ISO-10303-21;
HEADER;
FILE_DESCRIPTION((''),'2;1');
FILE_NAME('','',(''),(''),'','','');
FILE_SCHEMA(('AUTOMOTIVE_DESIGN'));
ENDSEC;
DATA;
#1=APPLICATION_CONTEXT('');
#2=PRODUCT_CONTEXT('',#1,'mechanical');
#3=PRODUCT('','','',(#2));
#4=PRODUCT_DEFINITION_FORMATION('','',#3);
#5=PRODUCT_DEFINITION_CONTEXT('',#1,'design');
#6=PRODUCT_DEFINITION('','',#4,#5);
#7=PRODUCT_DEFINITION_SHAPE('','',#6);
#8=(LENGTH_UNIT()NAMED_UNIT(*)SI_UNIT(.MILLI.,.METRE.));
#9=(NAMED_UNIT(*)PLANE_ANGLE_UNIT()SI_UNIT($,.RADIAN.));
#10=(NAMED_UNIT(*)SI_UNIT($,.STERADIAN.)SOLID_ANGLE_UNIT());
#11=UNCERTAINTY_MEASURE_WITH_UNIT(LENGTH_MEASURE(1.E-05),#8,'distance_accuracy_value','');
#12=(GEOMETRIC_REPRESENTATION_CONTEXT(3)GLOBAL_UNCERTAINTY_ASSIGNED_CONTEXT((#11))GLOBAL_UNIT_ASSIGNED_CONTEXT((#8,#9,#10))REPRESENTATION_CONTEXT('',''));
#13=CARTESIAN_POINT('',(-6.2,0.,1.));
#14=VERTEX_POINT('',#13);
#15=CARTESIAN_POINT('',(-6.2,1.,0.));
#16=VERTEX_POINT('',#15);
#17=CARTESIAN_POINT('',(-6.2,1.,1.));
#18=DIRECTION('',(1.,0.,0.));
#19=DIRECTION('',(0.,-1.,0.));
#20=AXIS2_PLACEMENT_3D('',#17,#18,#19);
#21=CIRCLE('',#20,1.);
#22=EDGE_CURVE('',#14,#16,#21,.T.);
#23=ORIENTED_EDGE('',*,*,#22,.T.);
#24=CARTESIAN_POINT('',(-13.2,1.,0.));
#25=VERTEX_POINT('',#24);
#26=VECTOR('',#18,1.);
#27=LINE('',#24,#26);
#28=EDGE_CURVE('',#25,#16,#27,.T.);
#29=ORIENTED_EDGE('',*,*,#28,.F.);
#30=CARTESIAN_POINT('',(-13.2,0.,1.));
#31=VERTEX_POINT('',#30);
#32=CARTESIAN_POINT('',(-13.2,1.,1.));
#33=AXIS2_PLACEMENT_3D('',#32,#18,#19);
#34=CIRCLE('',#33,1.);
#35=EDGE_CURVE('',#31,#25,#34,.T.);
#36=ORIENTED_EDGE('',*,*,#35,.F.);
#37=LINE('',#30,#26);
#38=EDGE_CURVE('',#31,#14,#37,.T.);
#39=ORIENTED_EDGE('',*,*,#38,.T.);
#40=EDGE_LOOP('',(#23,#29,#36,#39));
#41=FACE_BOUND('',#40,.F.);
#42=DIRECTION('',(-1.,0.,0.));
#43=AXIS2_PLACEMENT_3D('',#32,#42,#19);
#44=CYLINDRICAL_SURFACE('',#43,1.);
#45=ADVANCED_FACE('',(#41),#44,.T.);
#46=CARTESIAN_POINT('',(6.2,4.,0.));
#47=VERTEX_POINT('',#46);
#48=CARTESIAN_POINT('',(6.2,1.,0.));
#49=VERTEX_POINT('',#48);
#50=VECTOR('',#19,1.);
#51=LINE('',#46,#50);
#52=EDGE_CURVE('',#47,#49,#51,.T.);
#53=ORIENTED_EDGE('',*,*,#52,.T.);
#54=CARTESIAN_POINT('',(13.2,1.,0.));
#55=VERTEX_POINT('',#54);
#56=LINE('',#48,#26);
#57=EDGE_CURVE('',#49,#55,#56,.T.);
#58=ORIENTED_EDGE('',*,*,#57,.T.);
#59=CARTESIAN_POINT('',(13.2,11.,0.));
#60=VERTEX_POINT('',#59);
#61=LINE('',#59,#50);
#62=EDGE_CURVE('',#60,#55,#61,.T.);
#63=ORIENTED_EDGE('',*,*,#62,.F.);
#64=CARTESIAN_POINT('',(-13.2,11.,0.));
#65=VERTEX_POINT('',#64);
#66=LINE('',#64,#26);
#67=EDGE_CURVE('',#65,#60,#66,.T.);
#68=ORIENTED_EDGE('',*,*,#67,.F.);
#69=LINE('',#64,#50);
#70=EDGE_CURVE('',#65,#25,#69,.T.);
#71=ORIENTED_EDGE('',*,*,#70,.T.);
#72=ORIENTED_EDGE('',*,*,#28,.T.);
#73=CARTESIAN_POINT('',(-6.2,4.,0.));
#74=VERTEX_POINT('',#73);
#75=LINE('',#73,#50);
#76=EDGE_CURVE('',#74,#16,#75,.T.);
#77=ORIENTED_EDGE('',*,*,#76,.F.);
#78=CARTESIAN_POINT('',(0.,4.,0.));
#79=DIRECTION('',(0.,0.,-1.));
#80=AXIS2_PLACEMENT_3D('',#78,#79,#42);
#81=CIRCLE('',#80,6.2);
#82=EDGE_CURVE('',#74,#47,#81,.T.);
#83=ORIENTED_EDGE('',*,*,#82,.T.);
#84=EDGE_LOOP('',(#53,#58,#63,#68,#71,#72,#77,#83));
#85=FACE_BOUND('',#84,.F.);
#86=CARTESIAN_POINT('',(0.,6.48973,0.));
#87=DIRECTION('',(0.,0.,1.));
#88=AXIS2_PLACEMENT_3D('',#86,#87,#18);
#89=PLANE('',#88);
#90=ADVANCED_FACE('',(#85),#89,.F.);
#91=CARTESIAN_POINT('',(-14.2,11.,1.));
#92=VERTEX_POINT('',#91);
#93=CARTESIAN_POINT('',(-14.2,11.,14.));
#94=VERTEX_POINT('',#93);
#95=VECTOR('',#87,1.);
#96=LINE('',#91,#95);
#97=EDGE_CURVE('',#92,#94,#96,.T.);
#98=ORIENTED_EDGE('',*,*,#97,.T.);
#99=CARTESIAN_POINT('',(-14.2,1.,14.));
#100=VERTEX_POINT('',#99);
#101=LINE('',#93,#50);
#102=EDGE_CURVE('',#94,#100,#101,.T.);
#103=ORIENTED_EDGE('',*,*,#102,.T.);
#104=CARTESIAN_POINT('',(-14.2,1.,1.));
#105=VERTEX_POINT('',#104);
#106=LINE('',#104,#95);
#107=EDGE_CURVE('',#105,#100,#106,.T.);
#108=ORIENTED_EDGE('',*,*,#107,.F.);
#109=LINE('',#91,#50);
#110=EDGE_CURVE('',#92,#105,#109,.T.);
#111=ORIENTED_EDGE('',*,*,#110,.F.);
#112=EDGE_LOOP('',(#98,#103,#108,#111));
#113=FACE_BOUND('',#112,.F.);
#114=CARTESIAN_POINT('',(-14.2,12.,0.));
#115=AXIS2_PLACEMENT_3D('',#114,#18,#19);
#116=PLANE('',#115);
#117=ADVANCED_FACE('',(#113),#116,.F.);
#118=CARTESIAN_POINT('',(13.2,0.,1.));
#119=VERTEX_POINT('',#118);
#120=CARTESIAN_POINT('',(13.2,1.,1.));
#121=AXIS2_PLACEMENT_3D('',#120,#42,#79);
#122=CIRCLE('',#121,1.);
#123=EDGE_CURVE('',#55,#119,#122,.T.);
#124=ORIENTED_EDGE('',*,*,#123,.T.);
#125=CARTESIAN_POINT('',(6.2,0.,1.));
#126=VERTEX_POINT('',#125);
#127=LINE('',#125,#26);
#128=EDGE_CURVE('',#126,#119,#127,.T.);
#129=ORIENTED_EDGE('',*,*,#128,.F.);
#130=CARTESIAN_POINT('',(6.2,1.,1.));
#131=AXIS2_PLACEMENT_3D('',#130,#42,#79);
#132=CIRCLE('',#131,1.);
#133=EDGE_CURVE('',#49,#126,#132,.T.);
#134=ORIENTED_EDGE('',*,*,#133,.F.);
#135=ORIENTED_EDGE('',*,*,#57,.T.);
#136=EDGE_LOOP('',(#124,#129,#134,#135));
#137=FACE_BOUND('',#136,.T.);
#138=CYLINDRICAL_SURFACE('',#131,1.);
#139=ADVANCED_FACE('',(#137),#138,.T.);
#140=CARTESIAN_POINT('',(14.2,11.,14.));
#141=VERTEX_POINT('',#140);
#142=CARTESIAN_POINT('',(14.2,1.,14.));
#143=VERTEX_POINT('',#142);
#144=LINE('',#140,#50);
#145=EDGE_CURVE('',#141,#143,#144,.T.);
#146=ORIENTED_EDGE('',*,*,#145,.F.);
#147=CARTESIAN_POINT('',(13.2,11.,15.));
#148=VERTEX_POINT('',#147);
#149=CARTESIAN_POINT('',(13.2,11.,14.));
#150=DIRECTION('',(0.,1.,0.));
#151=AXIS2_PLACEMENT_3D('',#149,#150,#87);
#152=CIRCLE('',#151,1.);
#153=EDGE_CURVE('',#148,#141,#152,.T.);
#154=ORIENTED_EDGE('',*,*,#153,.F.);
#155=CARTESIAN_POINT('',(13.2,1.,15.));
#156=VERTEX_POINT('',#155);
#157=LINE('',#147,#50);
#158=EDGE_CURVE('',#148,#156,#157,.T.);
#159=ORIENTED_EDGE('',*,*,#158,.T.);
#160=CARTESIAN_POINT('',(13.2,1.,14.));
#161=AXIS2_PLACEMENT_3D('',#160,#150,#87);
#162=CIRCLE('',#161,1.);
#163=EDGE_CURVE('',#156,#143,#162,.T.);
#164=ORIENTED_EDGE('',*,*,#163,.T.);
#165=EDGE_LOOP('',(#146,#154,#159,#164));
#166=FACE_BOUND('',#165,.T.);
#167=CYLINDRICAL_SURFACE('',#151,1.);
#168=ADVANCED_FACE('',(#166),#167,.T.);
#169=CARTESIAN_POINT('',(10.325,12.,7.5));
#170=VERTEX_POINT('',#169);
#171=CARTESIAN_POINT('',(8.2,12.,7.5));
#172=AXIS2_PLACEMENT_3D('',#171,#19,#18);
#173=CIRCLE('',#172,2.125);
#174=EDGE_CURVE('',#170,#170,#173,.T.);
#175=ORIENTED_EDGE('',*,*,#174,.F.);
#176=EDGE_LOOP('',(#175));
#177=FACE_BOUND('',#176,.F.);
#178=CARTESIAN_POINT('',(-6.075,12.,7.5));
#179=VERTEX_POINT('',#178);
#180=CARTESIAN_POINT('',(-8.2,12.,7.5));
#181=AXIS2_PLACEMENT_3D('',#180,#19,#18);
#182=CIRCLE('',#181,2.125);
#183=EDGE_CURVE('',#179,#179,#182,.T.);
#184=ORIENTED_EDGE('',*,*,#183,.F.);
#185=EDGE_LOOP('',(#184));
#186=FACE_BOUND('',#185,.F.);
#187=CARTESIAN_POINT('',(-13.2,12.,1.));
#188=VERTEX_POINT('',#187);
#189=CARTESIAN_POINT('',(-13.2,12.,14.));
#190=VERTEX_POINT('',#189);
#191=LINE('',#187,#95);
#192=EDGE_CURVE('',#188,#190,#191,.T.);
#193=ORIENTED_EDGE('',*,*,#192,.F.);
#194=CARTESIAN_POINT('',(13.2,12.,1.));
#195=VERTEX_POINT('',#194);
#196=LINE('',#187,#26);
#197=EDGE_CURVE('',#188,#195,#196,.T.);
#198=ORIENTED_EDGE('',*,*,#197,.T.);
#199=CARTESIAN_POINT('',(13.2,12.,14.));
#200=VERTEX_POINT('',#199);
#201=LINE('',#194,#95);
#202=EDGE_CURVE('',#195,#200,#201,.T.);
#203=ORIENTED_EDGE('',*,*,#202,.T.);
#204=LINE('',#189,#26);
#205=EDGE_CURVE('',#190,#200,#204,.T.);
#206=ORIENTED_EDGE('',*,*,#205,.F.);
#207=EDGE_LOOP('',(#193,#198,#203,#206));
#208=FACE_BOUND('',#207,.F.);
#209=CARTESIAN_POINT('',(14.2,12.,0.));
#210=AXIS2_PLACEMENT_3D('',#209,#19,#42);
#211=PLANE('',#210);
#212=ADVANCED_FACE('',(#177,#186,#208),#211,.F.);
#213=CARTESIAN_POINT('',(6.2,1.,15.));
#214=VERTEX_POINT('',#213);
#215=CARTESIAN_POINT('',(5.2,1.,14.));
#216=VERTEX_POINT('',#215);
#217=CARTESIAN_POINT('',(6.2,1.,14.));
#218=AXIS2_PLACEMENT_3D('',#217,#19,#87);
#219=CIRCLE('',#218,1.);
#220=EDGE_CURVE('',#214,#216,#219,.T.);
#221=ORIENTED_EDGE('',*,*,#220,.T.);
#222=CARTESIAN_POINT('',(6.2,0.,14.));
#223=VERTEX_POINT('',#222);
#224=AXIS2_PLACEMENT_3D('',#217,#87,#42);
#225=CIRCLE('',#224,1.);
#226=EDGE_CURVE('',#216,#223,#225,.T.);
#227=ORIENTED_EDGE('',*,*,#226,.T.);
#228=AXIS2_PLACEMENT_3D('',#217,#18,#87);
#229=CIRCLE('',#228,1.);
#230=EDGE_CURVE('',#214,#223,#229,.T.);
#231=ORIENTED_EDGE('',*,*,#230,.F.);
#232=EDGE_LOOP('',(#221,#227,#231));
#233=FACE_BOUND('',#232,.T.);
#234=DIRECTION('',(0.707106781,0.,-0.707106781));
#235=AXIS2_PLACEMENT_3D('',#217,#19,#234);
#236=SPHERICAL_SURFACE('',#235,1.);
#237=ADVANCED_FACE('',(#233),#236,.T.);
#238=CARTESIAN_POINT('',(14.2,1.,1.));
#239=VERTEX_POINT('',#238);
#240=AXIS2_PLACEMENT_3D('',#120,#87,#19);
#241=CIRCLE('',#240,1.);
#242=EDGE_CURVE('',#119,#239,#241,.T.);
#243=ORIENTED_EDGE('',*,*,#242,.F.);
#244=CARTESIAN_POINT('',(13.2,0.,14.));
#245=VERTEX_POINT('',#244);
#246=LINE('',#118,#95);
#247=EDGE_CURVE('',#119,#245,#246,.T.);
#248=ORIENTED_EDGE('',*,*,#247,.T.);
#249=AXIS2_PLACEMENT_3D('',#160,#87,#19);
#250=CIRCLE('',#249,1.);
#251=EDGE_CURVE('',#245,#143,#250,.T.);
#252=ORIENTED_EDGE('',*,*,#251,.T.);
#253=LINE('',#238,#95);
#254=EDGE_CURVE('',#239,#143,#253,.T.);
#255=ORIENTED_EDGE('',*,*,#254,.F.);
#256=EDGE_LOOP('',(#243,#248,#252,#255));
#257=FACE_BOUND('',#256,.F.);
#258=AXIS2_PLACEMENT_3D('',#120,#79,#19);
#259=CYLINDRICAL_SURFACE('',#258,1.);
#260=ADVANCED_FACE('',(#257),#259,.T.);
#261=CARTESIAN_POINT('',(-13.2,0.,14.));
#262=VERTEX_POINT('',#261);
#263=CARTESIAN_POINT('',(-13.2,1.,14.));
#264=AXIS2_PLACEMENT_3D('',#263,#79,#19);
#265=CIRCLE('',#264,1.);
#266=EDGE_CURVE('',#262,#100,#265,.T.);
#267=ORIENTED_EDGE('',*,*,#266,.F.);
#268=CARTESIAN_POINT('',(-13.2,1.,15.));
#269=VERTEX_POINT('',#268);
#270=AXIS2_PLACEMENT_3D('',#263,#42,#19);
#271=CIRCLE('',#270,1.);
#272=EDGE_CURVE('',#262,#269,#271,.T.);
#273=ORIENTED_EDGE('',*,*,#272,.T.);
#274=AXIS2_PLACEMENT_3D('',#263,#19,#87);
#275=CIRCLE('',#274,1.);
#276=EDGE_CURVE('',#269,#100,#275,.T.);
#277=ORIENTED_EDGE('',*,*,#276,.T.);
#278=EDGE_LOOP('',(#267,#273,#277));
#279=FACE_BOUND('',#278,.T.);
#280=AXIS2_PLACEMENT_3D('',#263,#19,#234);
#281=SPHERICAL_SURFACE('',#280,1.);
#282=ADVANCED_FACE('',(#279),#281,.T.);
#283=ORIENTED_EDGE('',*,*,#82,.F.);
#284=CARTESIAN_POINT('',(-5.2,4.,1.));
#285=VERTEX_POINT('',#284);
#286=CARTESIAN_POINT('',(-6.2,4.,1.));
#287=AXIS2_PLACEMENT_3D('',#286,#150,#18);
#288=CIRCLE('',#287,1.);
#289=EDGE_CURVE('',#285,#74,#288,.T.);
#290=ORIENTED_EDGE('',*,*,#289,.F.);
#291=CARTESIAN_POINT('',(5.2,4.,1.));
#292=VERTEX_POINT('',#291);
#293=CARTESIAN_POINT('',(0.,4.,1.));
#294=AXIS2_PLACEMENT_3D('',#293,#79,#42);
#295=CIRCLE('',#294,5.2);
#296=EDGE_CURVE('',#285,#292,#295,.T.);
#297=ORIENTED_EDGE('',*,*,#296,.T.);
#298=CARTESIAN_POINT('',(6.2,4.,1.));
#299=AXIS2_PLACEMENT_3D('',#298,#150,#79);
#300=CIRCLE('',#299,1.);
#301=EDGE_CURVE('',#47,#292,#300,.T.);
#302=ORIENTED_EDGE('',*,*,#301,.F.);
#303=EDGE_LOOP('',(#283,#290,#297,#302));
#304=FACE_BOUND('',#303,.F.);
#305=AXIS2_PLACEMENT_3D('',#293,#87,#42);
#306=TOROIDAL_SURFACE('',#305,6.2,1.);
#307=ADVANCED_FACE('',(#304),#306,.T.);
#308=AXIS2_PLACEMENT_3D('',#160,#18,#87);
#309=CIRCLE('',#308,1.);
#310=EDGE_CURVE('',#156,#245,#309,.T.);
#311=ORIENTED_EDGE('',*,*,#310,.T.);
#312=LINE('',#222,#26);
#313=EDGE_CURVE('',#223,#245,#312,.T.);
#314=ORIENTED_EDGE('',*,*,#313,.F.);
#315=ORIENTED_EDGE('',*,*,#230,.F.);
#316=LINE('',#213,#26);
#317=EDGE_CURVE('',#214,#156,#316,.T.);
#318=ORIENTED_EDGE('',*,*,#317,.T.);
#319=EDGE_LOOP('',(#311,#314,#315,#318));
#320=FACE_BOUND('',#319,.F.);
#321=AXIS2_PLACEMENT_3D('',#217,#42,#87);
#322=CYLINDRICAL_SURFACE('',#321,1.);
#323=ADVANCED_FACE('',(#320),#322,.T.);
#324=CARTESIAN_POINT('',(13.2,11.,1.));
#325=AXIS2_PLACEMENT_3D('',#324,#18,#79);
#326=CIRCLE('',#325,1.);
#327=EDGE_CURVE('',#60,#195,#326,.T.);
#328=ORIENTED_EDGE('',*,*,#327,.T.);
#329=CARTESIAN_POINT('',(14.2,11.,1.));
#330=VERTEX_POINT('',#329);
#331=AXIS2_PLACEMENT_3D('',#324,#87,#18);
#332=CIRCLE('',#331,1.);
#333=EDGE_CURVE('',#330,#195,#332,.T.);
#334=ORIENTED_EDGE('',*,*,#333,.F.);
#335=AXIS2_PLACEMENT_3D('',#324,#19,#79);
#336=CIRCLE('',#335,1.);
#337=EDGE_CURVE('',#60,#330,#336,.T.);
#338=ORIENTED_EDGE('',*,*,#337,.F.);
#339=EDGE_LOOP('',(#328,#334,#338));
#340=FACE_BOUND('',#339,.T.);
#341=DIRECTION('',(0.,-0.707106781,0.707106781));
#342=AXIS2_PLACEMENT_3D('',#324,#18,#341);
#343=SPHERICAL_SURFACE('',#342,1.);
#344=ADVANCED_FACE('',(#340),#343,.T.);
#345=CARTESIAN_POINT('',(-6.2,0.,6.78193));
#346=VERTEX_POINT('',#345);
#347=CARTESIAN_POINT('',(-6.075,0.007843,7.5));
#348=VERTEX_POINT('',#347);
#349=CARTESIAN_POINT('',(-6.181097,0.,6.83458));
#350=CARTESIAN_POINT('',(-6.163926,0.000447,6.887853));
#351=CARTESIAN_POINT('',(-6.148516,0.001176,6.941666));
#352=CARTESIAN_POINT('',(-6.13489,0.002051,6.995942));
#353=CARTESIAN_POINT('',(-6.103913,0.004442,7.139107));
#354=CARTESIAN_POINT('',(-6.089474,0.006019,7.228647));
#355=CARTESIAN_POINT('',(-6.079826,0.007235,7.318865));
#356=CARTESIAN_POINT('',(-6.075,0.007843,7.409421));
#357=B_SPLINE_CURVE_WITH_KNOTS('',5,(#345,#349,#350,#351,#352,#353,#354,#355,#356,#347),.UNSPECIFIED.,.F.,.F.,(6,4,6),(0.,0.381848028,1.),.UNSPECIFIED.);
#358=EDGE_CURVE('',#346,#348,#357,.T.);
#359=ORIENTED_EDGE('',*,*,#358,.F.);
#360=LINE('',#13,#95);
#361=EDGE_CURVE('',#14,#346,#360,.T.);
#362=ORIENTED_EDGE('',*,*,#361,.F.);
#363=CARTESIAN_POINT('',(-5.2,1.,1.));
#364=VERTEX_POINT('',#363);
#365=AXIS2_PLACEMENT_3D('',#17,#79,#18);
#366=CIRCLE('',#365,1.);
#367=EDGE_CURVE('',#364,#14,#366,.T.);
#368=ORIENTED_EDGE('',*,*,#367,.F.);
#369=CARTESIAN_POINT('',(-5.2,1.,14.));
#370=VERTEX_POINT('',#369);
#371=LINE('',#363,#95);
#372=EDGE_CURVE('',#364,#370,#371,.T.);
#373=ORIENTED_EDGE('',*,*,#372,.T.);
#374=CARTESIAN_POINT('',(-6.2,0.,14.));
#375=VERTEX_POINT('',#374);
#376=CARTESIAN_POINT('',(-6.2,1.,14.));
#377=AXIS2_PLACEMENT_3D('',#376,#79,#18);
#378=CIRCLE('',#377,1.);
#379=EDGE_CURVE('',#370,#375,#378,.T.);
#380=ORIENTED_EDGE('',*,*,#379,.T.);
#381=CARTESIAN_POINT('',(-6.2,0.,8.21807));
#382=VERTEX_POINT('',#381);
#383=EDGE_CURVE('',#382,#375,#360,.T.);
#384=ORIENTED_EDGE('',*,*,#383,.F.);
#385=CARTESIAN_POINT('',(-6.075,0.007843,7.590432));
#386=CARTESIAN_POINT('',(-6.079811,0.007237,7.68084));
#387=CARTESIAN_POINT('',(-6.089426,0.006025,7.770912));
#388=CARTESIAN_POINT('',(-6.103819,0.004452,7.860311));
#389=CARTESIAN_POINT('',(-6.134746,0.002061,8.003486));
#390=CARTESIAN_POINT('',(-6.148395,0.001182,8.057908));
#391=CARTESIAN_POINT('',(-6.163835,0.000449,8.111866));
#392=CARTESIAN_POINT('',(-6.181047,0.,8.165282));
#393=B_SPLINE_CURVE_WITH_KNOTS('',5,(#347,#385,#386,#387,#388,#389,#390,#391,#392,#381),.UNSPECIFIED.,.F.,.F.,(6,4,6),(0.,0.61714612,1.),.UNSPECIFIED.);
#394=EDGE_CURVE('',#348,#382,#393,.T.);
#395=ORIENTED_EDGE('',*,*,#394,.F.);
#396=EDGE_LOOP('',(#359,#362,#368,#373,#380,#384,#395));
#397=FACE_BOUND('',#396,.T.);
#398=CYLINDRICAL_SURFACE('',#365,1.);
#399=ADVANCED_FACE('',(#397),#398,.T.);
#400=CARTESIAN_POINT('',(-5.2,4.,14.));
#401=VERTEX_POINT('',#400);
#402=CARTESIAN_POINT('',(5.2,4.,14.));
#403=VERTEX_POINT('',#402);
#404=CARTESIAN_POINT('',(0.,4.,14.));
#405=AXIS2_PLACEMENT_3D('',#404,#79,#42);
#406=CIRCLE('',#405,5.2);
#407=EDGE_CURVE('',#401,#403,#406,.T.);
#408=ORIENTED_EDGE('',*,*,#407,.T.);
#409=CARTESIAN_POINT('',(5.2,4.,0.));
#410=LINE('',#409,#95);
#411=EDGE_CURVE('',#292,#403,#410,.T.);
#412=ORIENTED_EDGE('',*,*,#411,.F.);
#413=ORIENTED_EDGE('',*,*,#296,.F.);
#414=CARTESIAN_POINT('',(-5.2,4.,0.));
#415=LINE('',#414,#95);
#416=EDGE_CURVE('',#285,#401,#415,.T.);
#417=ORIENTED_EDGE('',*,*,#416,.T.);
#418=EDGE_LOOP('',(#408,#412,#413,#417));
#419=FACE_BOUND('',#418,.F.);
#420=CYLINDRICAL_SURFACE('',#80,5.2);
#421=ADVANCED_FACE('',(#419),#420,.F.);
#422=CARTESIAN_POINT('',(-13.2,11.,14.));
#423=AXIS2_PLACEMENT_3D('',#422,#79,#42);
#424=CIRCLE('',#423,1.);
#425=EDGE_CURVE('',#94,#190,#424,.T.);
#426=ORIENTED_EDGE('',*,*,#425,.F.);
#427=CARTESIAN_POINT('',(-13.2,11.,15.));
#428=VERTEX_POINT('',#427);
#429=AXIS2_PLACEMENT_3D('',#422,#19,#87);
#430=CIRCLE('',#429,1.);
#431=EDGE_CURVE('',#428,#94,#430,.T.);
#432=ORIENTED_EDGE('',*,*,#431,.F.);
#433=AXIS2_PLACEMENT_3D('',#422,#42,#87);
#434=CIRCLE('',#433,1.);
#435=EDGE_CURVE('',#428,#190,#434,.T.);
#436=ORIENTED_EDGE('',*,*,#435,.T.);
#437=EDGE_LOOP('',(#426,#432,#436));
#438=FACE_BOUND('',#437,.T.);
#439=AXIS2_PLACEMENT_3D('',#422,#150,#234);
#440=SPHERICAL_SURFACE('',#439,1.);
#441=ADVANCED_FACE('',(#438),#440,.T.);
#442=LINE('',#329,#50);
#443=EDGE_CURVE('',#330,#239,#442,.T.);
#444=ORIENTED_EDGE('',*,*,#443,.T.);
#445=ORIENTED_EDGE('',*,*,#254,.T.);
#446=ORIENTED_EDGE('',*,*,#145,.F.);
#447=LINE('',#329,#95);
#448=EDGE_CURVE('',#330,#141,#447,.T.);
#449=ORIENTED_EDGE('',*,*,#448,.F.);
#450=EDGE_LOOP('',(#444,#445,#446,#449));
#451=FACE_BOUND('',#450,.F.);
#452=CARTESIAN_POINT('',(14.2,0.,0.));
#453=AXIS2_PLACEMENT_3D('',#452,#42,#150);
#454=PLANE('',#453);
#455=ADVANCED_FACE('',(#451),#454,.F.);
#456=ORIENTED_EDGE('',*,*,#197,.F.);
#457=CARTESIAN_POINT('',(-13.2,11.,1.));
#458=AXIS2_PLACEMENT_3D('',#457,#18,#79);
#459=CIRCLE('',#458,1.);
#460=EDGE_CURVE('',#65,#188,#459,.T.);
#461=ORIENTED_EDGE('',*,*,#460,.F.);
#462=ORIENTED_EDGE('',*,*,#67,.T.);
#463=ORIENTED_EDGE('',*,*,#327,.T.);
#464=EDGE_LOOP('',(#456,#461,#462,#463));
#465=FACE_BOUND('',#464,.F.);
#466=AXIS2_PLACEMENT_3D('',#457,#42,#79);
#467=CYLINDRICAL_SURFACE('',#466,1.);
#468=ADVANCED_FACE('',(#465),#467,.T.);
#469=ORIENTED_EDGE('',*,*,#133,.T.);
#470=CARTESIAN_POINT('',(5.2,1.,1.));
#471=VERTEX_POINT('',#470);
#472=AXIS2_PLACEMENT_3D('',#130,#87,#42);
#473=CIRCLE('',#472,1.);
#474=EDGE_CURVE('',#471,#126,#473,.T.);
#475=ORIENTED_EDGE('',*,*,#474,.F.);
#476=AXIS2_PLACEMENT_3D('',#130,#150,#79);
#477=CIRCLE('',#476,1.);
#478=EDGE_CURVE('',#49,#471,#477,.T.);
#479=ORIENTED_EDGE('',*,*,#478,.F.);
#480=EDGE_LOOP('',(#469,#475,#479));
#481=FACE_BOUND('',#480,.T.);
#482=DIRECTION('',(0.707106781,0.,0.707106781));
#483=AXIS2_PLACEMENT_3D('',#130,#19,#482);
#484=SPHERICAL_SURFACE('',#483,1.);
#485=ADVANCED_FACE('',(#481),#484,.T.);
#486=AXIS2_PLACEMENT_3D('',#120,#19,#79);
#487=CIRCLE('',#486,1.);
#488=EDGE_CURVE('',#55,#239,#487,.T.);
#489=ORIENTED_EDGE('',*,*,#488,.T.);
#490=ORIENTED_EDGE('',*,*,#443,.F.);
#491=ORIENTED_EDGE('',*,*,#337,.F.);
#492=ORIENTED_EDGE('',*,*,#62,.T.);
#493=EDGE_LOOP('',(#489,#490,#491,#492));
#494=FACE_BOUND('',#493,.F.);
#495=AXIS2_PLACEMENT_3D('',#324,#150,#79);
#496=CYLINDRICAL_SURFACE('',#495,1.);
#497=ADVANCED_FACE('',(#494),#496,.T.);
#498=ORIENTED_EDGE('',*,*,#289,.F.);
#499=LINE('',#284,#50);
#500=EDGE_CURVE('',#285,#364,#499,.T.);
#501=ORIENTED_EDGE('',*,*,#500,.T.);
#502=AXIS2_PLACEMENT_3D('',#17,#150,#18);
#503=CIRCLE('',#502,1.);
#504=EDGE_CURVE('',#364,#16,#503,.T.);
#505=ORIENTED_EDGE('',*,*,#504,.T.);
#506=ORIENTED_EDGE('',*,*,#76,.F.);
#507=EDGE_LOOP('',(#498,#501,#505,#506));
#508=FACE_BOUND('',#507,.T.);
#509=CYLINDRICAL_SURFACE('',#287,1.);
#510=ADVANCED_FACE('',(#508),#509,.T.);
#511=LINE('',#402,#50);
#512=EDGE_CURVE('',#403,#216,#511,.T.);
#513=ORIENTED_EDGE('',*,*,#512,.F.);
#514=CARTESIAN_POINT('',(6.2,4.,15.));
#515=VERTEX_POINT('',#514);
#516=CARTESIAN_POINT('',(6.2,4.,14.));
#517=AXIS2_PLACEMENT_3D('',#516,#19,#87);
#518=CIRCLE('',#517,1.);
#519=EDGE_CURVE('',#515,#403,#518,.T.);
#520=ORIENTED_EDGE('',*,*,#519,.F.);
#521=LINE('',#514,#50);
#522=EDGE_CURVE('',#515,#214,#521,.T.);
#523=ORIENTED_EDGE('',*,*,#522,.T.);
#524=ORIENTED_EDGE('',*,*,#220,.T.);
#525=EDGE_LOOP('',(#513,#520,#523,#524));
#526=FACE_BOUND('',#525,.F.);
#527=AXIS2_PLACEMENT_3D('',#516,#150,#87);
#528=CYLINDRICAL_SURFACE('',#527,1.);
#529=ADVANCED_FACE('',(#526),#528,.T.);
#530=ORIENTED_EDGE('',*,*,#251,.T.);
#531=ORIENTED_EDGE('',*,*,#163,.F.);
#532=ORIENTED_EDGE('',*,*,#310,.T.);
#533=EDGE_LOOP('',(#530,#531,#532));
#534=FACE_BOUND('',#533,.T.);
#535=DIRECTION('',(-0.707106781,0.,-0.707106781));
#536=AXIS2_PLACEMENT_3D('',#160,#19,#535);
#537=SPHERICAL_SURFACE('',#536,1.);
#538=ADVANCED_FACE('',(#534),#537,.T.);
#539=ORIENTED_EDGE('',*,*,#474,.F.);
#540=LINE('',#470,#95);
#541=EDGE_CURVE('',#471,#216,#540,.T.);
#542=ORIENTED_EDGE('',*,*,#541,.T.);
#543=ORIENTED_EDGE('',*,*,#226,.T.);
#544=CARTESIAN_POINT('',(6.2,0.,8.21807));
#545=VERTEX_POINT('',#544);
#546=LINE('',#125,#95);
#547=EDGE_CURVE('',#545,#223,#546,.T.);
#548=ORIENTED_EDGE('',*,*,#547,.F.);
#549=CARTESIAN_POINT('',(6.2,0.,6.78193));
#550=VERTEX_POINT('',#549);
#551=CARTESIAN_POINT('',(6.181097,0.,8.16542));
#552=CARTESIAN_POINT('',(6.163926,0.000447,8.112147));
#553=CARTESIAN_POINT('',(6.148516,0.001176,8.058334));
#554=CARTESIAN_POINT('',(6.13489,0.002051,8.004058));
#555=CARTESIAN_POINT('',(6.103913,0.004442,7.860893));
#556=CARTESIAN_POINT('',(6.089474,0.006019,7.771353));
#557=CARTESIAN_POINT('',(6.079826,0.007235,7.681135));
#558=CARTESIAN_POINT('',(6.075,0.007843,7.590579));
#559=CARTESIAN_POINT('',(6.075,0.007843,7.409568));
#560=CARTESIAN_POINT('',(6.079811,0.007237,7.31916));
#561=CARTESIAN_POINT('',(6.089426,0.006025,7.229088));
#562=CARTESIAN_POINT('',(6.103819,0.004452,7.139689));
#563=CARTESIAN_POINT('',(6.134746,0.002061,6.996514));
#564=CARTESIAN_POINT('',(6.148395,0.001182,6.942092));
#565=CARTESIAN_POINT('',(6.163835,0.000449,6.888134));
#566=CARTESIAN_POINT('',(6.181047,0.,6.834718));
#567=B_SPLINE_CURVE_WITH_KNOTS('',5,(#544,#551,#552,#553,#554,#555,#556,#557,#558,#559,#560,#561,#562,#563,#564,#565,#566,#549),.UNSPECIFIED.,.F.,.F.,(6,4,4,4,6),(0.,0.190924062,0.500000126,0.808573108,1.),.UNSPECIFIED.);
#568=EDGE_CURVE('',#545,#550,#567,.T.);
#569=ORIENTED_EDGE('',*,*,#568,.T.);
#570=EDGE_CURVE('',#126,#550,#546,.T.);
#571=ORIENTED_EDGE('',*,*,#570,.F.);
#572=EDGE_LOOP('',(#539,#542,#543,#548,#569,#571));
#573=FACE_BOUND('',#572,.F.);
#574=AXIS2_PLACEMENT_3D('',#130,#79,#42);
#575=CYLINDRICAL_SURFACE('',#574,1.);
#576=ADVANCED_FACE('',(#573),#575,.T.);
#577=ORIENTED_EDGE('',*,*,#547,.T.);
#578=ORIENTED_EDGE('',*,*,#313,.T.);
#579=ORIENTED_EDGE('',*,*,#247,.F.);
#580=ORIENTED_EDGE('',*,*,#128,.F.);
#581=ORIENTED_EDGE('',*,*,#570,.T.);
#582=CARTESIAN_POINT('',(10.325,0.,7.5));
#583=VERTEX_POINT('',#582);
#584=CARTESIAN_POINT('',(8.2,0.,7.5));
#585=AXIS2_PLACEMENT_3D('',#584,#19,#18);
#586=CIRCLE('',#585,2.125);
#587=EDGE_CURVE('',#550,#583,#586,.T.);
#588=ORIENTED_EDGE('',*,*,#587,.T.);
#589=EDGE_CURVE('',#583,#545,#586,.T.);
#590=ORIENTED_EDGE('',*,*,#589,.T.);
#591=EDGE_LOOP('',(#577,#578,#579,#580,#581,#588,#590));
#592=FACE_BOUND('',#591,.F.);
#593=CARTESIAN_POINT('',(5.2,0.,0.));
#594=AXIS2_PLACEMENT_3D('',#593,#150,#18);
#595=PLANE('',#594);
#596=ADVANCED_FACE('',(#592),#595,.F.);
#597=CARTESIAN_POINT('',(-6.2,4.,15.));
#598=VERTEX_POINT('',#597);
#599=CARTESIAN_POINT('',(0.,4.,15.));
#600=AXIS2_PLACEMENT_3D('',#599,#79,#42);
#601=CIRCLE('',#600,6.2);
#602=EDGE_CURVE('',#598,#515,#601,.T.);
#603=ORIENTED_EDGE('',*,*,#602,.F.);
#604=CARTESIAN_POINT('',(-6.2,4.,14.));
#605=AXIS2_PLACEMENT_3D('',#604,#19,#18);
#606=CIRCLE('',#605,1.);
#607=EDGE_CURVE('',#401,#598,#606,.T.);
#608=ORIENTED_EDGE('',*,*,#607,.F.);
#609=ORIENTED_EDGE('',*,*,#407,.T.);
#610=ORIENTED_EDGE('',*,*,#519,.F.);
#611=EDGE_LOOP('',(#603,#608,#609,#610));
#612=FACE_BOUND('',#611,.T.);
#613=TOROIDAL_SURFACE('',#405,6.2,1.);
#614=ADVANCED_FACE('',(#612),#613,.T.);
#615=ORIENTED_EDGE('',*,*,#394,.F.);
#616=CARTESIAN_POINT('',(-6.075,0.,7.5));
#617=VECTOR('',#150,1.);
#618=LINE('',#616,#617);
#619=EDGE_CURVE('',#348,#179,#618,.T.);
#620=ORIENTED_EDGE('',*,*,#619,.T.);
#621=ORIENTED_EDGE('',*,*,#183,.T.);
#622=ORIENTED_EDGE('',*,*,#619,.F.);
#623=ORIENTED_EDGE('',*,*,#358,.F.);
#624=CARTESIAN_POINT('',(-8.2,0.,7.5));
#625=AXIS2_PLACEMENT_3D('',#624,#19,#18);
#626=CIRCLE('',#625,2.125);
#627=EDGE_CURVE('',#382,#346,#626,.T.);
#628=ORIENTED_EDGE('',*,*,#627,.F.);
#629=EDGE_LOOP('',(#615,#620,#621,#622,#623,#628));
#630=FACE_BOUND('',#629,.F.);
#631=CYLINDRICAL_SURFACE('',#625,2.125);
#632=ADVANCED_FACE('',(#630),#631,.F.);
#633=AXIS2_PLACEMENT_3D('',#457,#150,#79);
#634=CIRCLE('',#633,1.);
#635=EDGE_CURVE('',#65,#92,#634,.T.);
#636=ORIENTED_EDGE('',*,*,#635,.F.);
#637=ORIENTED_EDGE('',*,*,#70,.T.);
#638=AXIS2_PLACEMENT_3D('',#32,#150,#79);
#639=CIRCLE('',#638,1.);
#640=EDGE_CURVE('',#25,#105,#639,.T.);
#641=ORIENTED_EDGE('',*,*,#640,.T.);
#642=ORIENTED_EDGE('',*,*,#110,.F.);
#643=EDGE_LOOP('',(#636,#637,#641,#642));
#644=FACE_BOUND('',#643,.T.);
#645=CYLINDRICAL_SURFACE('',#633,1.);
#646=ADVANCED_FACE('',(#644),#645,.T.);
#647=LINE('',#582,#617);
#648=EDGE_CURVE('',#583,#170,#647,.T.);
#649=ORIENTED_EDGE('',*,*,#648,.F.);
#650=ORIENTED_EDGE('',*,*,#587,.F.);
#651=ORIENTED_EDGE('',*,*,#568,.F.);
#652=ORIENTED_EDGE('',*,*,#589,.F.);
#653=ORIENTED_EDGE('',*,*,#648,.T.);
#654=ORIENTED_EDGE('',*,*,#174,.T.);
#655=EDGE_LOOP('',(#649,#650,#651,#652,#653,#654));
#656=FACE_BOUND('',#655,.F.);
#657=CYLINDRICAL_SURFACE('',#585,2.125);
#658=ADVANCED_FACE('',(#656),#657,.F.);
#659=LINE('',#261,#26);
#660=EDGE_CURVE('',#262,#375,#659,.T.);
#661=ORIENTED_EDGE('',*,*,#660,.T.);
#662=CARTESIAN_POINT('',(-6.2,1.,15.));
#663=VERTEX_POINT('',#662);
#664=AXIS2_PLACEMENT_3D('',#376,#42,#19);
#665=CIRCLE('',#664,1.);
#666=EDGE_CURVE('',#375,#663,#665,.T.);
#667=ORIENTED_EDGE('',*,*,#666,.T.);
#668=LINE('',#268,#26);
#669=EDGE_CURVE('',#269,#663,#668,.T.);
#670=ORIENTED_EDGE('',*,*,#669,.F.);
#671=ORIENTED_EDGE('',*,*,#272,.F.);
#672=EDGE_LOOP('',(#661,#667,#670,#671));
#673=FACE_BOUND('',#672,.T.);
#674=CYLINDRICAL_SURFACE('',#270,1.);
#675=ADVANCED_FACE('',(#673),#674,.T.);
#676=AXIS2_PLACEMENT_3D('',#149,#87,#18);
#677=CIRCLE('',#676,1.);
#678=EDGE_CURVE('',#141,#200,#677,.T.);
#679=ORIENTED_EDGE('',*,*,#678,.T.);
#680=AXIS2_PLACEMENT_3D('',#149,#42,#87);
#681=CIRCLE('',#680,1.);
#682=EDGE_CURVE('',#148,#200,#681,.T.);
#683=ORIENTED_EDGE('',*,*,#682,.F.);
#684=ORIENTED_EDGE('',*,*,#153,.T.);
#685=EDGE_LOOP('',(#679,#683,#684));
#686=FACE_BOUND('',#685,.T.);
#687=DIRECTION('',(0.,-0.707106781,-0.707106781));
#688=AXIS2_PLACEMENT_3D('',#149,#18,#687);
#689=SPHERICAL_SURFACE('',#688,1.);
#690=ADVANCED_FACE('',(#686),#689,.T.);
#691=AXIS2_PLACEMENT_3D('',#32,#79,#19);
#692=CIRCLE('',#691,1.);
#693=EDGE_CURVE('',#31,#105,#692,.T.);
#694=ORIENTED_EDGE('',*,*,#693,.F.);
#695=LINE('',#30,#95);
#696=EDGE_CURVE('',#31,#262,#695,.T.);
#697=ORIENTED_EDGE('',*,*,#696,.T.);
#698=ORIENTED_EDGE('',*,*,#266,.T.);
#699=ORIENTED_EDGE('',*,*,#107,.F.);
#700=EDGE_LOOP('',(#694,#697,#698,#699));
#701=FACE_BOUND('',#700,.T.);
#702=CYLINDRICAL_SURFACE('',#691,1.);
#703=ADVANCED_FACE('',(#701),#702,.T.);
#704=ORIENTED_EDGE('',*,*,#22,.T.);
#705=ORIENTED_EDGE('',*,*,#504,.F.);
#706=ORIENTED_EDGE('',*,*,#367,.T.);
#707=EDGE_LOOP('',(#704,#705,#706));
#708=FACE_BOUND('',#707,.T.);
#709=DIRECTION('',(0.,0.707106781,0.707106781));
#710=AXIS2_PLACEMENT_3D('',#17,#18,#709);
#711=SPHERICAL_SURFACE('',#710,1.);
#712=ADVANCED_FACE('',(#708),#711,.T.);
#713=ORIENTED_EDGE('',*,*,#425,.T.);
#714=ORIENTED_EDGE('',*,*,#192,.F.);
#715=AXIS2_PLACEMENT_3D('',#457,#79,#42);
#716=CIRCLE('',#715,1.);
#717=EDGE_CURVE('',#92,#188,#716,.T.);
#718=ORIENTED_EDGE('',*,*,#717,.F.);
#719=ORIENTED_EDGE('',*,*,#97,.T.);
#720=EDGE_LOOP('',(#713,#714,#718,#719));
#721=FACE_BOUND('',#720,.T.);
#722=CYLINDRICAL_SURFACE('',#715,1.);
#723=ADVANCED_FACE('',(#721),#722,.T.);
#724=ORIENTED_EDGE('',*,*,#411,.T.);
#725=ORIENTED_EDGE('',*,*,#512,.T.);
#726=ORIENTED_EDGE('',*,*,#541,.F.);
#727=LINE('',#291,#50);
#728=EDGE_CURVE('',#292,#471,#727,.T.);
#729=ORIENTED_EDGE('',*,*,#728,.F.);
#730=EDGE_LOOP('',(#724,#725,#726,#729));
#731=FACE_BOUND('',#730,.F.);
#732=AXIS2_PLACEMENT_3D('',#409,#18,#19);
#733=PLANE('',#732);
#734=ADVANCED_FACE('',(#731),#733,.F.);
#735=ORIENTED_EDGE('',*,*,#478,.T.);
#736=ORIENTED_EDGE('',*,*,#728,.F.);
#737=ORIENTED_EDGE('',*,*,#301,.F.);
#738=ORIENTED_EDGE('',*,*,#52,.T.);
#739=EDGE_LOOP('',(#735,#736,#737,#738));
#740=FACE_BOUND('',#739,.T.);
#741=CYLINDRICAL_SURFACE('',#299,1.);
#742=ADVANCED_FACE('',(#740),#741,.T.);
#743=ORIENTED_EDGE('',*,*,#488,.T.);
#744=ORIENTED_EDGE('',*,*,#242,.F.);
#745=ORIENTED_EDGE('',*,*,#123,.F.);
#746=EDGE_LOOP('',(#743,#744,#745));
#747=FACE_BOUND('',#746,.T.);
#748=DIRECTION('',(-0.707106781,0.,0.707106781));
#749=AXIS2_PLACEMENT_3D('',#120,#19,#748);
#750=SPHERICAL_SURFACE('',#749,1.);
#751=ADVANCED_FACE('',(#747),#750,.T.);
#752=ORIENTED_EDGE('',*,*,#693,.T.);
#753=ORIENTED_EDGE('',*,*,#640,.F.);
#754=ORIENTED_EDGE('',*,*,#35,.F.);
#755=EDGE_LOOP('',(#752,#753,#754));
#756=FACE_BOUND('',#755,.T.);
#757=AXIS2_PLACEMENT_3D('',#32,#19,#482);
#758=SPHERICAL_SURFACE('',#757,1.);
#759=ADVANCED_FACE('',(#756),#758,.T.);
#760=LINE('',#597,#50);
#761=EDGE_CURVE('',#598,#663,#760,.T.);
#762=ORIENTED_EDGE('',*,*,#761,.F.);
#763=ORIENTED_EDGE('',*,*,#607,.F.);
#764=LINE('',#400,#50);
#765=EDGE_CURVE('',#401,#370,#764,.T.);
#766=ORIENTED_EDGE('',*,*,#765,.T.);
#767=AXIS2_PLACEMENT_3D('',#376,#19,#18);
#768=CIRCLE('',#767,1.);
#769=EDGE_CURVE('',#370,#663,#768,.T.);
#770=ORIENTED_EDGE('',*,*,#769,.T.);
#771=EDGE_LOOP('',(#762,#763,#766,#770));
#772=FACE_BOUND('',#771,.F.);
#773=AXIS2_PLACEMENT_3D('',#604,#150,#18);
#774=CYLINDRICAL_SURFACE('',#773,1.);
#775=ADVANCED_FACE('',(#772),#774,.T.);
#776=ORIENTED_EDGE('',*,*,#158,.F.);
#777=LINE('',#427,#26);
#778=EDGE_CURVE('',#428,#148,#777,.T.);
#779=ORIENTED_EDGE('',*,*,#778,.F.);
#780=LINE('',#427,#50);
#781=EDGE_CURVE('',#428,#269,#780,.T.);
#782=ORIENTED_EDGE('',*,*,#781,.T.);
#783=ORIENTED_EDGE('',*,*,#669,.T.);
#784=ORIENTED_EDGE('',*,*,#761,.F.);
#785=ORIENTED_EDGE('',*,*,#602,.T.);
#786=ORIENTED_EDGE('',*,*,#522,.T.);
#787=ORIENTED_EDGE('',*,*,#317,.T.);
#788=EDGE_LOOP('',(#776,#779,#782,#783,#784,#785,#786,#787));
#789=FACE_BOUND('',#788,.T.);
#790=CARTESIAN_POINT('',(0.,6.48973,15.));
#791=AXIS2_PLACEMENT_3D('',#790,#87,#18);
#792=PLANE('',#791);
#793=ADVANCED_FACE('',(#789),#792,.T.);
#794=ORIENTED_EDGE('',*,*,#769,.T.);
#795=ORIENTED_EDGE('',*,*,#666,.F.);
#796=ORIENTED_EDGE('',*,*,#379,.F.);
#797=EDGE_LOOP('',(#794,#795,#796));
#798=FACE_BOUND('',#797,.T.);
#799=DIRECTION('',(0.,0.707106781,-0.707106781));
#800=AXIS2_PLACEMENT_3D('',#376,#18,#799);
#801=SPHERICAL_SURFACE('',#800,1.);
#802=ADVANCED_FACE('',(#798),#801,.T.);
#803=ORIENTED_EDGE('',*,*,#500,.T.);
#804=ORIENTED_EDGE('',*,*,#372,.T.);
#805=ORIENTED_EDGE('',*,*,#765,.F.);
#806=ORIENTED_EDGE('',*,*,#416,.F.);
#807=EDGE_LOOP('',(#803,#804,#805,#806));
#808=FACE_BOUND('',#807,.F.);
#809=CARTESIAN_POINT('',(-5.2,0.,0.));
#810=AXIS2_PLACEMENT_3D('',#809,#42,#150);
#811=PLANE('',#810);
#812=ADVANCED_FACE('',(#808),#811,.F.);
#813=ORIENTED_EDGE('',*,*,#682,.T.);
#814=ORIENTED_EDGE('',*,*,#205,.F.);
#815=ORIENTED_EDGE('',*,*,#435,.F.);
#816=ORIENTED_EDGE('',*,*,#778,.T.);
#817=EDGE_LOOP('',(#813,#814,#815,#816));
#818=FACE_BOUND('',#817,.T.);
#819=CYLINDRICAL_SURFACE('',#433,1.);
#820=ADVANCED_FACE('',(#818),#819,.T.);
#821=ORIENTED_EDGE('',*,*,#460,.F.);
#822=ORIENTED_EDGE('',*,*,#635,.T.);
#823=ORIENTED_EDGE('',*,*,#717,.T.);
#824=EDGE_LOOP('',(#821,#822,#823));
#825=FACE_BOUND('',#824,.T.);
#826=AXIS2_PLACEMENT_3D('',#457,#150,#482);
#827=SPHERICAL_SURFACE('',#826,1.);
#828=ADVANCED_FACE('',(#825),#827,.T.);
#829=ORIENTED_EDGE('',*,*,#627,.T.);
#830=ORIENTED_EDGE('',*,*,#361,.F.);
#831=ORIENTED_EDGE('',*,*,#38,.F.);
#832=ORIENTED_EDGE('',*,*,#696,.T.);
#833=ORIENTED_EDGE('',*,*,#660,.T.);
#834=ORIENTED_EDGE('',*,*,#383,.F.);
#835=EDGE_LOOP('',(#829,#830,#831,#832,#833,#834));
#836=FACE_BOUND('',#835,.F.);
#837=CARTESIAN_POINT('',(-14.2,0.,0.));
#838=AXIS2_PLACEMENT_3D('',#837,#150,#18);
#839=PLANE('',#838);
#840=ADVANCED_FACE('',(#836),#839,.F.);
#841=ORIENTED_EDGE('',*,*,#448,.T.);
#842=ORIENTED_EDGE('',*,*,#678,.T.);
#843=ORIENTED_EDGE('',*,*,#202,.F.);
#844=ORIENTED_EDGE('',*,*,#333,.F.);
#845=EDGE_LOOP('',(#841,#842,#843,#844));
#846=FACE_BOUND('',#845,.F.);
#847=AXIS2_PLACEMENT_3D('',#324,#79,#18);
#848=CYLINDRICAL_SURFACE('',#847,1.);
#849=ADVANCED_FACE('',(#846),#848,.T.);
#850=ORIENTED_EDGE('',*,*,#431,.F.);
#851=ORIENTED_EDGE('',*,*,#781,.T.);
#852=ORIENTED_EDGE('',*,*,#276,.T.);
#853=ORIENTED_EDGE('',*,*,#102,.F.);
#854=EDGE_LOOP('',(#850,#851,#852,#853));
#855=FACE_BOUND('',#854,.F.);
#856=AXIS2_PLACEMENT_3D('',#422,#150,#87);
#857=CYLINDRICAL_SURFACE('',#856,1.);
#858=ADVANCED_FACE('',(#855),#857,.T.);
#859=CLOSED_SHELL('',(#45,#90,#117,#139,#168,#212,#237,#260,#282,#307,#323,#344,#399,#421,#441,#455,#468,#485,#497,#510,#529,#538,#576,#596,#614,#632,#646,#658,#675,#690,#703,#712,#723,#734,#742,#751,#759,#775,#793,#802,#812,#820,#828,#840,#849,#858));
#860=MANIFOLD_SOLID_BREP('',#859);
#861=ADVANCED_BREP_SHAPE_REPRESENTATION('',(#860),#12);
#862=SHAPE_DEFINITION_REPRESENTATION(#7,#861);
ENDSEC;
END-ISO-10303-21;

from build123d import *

# Parameters (mm, degrees)
F1_DEPTH     = 15
F2_R         = 2.125
F3_DEPTH     = 12.001
F4_T1_DEPTH  = 3
F4_T3_DEPTH  = 7
F4_T5_DEPTH  = 10
F4_T7_DEPTH  = 26.4
F4_T9_DEPTH  = 7
F4_T11_DEPTH = 13
F4_S15_W     = 1
F4_S15_H     = 1
F4_T16_DEPTH = 1
F4_S21_W     = 1
F4_S21_H     = 1
F4_T22_DEPTH = 1
F4_S27_W     = 1
F4_S27_H     = 1
F4_T28_DEPTH = 1
F4_S33_W     = 1
F4_S33_H     = 1
F4_T34_DEPTH = 1
F4_S39_W     = 1
F4_S39_H     = 1
F4_T40_DEPTH = 1
F4_S45_W     = 1
F4_S45_H     = 1
F4_T46_DEPTH = 1
F4_S51_W     = 1
F4_S51_H     = 1
F4_T52_DEPTH = 1
F4_S57_W     = 1
F4_S57_H     = 1
F4_T58_DEPTH = 1
F4_S63_W     = 1
F4_S63_H     = 1
F4_T64_DEPTH = 1
F4_S69_W     = 1
F4_S69_H     = 1
F4_T70_DEPTH = 1
F4_S75_W     = 1
F4_S75_H     = 1
F4_T76_DEPTH = 1
F4_S81_W     = 1
F4_S81_H     = 1
F4_T82_DEPTH = 1
F4_T86_ANGLE = 180
F4_T88_ANGLE = 180


# Not quite as in the source:
# - a fillet or chamfer that OpenCascade refuses, or shapes differently, is made with other operations: its cross-section is extruded or revolved along the edge and cut away or added


with BuildPart() as f1:
    # F0 (on Top) → F1 (new body)
    with BuildSketch(Plane.XY):
        with BuildLine():
            Line((5.2, 4), (5.2, 0))
            Line((5.2, 0), (14.2, 0))
            Line((14.2, 0), (14.2, 12))
            Line((14.2, 12), (-14.2, 12))
            Line((-14.2, 12), (-14.2, 0))
            Line((-14.2, 0), (-5.2, 0))
            Line((-5.2, 0), (-5.2, 4))
            ThreePointArc((-5.2, 4), (0, 9.2), (5.2, 4))
        make_face()
    extrude(amount=F1_DEPTH)

    # F2 (on face) → F3 (cut, through all)
    with BuildSketch(Plane.XZ):
        with Locations((-8.2, 7.5)):
            Circle(F2_R)
        with Locations((8.2, 7.5)):
            Circle(F2_R)
    extrude(amount=-F3_DEPTH, mode=Mode.SUBTRACT)

    # F4: fillet of radius 1 on 22 edges, made by hand

    # F4_s2 → F4_t1 (cut)
    with BuildSketch(Plane.XZ.offset(-4)):
        with BuildLine():
            ThreePointArc((-5.2, 14), (-5.4928932188, 14.7071067812), (-6.2, 15))
            Line((-6.2, 15), (-5.2, 15))
            Line((-5.2, 15), (-5.2, 14))
        make_face()
        with BuildLine():
            ThreePointArc((6.2, 15), (5.4928932188, 14.7071067812), (5.2, 14))
            Line((5.2, 14), (5.2, 15))
            Line((5.2, 15), (6.2, 15))
        make_face()
        with BuildLine():
            ThreePointArc((-5.2, 1), (-5.4928932188, 0.2928932188), (-6.2, 0))
            Line((-6.2, 0), (-5.2, 0))
            Line((-5.2, 0), (-5.2, 1))
        make_face()
        with BuildLine():
            ThreePointArc((6.2, 0), (5.4928932188, 0.2928932188), (5.2, 1))
            Line((5.2, 1), (5.2, 0))
            Line((5.2, 0), (6.2, 0))
        make_face()
    extrude(amount=F4_T1_DEPTH, mode=Mode.SUBTRACT)

    # F4_s4 → F4_t3 (cut)
    with BuildSketch(Plane.YZ.offset(6.2)):
        with BuildLine():
            ThreePointArc((1, 15), (0.2928932188, 14.7071067812), (0, 14))
            Line((0, 14), (0, 15))
            Line((0, 15), (1, 15))
        make_face()
        with BuildLine():
            ThreePointArc((1, 0), (0.2928932188, 0.2928932188), (0, 1))
            Line((0, 1), (0, 0))
            Line((0, 0), (1, 0))
        make_face()
    extrude(amount=F4_T3_DEPTH, mode=Mode.SUBTRACT)

    # F4_s6 → F4_t5 (cut)
    with BuildSketch(Plane.XZ.offset(-11)):
        with BuildLine():
            ThreePointArc((13.2, 15), (13.9071067812, 14.7071067812), (14.2, 14))
            Line((14.2, 14), (14.2, 15))
            Line((14.2, 15), (13.2, 15))
        make_face()
        with BuildLine():
            ThreePointArc((-13.2, 15), (-13.9071067812, 14.7071067812), (-14.2, 14))
            Line((-14.2, 14), (-14.2, 15))
            Line((-14.2, 15), (-13.2, 15))
        make_face()
        with BuildLine():
            ThreePointArc((-13.2, 0), (-13.9071067812, 0.2928932188), (-14.2, 1))
            Line((-14.2, 1), (-14.2, 0))
            Line((-14.2, 0), (-13.2, 0))
        make_face()
        with BuildLine():
            ThreePointArc((13.2, 0), (13.9071067812, 0.2928932188), (14.2, 1))
            Line((14.2, 1), (14.2, 0))
            Line((14.2, 0), (13.2, 0))
        make_face()
    extrude(amount=F4_T5_DEPTH, mode=Mode.SUBTRACT)

    # F4_s8 → F4_t7 (cut)
    with BuildSketch(Plane.YZ.offset(-13.2)):
        with BuildLine():
            ThreePointArc((11, 15), (11.7071067812, 14.7071067812), (12, 14))
            Line((12, 14), (12, 15))
            Line((12, 15), (11, 15))
        make_face()
        with BuildLine():
            ThreePointArc((11, 0), (11.7071067812, 0.2928932188), (12, 1))
            Line((12, 1), (12, 0))
            Line((12, 0), (11, 0))
        make_face()
    extrude(amount=F4_T7_DEPTH, mode=Mode.SUBTRACT)

    # F4_s10 → F4_t9 (cut)
    with BuildSketch(Plane.YZ.offset(-13.2)):
        with BuildLine():
            ThreePointArc((0, 14), (0.2928932188, 14.7071067812), (1, 15))
            Line((1, 15), (0, 15))
            Line((0, 15), (0, 14))
        make_face()
        with BuildLine():
            ThreePointArc((0, 1), (0.2928932188, 0.2928932188), (1, 0))
            Line((1, 0), (0, 0))
            Line((0, 0), (0, 1))
        make_face()
    extrude(amount=F4_T9_DEPTH, mode=Mode.SUBTRACT)

    # F4_s12 → F4_t11 (cut)
    with BuildSketch(Plane.XY.offset(1)):
        with BuildLine():
            ThreePointArc((-14.2, 11), (-13.9071067812, 11.7071067812), (-13.2, 12))
            Line((-13.2, 12), (-14.2, 12))
            Line((-14.2, 12), (-14.2, 11))
        make_face()
        with BuildLine():
            ThreePointArc((-13.2, 0), (-13.9071067812, 0.2928932188), (-14.2, 1))
            Line((-14.2, 1), (-14.2, 0))
            Line((-14.2, 0), (-13.2, 0))
        make_face()
        with BuildLine():
            ThreePointArc((13.2, 0), (13.9071067812, 0.2928932188), (14.2, 1))
            Line((14.2, 1), (14.2, 0))
            Line((14.2, 0), (13.2, 0))
        make_face()
        with BuildLine():
            ThreePointArc((14.2, 11), (13.9071067812, 11.7071067812), (13.2, 12))
            Line((13.2, 12), (14.2, 12))
            Line((14.2, 12), (14.2, 11))
        make_face()
        with BuildLine():
            ThreePointArc((-5.2, 1), (-5.4928932188, 0.2928932188), (-6.2, 0))
            Line((-6.2, 0), (-5.2, 0))
            Line((-5.2, 0), (-5.2, 1))
        make_face()
        with BuildLine():
            ThreePointArc((5.2, 1), (5.4928932188, 0.2928932188), (6.2, 0))
            Line((6.2, 0), (5.2, 0))
            Line((5.2, 0), (5.2, 1))
        make_face()
    extrude(amount=F4_T11_DEPTH, mode=Mode.SUBTRACT)


with BuildPart() as f4_tool14:
    # F4_s15 → F4_t16 (new body)
    with BuildSketch(Plane.YZ.offset(-6.2)):
        with Locations((0.5, 14.5)):
            Rectangle(F4_S15_W, F4_S15_H)
    extrude(amount=F4_T16_DEPTH)

    # F4_s17 → F4_t18 (revolve, cut)
    with BuildSketch(Plane(origin=(-6.2, 1, 14), x_dir=(0, 0.7071067812, -0.7071067812), z_dir=(0, -0.7071067812, -0.7071067812))):
        with BuildLine():
            ThreePointArc((0, -1), (1, 0), (0, 1))
            Line((0, 1), (0, -1))
        make_face()
    revolve(axis=Axis((-6.2, 1, 14), (1, 0, 0)), mode=Mode.SUBTRACT)


with BuildPart() as f1_1:
    add(f1.part)

    # F4_t13: cut F4_tool14
    add(f4_tool14.part, mode=Mode.SUBTRACT)


with BuildPart() as f4_tool20:
    # F4_s21 → F4_t22 (new body)
    with BuildSketch(Plane.XZ.offset(-1)):
        with Locations((5.7, 14.5)):
            Rectangle(F4_S21_W, F4_S21_H)
    extrude(amount=F4_T22_DEPTH)

    # F4_s23 → F4_t24 (revolve, cut)
    with BuildSketch(Plane(origin=(6.2, 1, 14), x_dir=(0.7071067812, 0, -0.7071067812), z_dir=(-0.7071067812, 0, -0.7071067812))):
        with BuildLine():
            ThreePointArc((0, -1), (1, 0), (0, 1))
            Line((0, 1), (0, -1))
        make_face()
    revolve(axis=Axis((6.2, 1, 14), (0, -1, 0)), mode=Mode.SUBTRACT)


with BuildPart() as f1_2:
    add(f1_1.part)

    # F4_t19: cut F4_tool20
    add(f4_tool20.part, mode=Mode.SUBTRACT)


with BuildPart() as f4_tool26:
    # F4_s27 → F4_t28 (new body)
    with BuildSketch(Plane.XZ.offset(-1)):
        with Locations((13.7, 14.5)):
            Rectangle(F4_S27_W, F4_S27_H)
    extrude(amount=F4_T28_DEPTH)

    # F4_s29 → F4_t30 (revolve, cut)
    with BuildSketch(Plane(origin=(13.2, 1, 14), x_dir=(-0.7071067812, 0, -0.7071067812), z_dir=(-0.7071067812, 0, 0.7071067812))):
        with BuildLine():
            ThreePointArc((0, -1), (1, 0), (0, 1))
            Line((0, 1), (0, -1))
        make_face()
    revolve(axis=Axis((13.2, 1, 14), (0, -1, 0)), mode=Mode.SUBTRACT)


with BuildPart() as f1_3:
    add(f1_2.part)

    # F4_t25: cut F4_tool26
    add(f4_tool26.part, mode=Mode.SUBTRACT)


with BuildPart() as f4_tool32:
    # F4_s33 → F4_t34 (new body)
    with BuildSketch(Plane.YZ.offset(13.2)):
        with Locations((11.5, 14.5)):
            Rectangle(F4_S33_W, F4_S33_H)
    extrude(amount=F4_T34_DEPTH)

    # F4_s35 → F4_t36 (revolve, cut)
    with BuildSketch(Plane(origin=(13.2, 11, 14), x_dir=(0, -0.7071067812, -0.7071067812), z_dir=(0, -0.7071067812, 0.7071067812))):
        with BuildLine():
            ThreePointArc((0, -1), (1, 0), (0, 1))
            Line((0, 1), (0, -1))
        make_face()
    revolve(axis=Axis((13.2, 11, 14), (1, 0, 0)), mode=Mode.SUBTRACT)


with BuildPart() as f1_4:
    add(f1_3.part)

    # F4_t31: cut F4_tool32
    add(f4_tool32.part, mode=Mode.SUBTRACT)


with BuildPart() as f4_tool38:
    # F4_s39 → F4_t40 (new body)
    with BuildSketch(Plane.XZ.offset(-11)):
        with Locations((-13.7, 14.5)):
            Rectangle(F4_S39_W, F4_S39_H)
    extrude(amount=-F4_T40_DEPTH)

    # F4_s41 → F4_t42 (revolve, cut)
    with BuildSketch(Plane(origin=(-13.2, 11, 14), x_dir=(0.7071067812, 0, -0.7071067812), z_dir=(0.7071067812, 0, 0.7071067812))):
        with BuildLine():
            ThreePointArc((0, -1), (1, 0), (0, 1))
            Line((0, 1), (0, -1))
        make_face()
    revolve(axis=Axis((-13.2, 11, 14), (0, 1, 0)), mode=Mode.SUBTRACT)


with BuildPart() as f1_5:
    add(f1_4.part)

    # F4_t37: cut F4_tool38
    add(f4_tool38.part, mode=Mode.SUBTRACT)


with BuildPart() as f4_tool44:
    # F4_s45 → F4_t46 (new body)
    with BuildSketch(Plane.XZ.offset(-1)):
        with Locations((-13.7, 14.5)):
            Rectangle(F4_S45_W, F4_S45_H)
    extrude(amount=F4_T46_DEPTH)

    # F4_s47 → F4_t48 (revolve, cut)
    with BuildSketch(Plane(origin=(-13.2, 1, 14), x_dir=(0.7071067812, 0, -0.7071067812), z_dir=(-0.7071067812, 0, -0.7071067812))):
        with BuildLine():
            ThreePointArc((0, -1), (1, 0), (0, 1))
            Line((0, 1), (0, -1))
        make_face()
    revolve(axis=Axis((-13.2, 1, 14), (0, -1, 0)), mode=Mode.SUBTRACT)


with BuildPart() as f1_6:
    add(f1_5.part)

    # F4_t43: cut F4_tool44
    add(f4_tool44.part, mode=Mode.SUBTRACT)


with BuildPart() as f4_tool50:
    # F4_s51 → F4_t52 (new body)
    with BuildSketch(Plane.XZ.offset(-11)):
        with Locations((-13.7, 0.5)):
            Rectangle(F4_S51_W, F4_S51_H)
    extrude(amount=-F4_T52_DEPTH)

    # F4_s53 → F4_t54 (revolve, cut)
    with BuildSketch(Plane(origin=(-13.2, 11, 1), x_dir=(0.7071067812, 0, 0.7071067812), z_dir=(-0.7071067812, 0, 0.7071067812))):
        with BuildLine():
            ThreePointArc((0, -1), (1, 0), (0, 1))
            Line((0, 1), (0, -1))
        make_face()
    revolve(axis=Axis((-13.2, 11, 1), (0, 1, 0)), mode=Mode.SUBTRACT)


with BuildPart() as f1_7:
    add(f1_6.part)

    # F4_t49: cut F4_tool50
    add(f4_tool50.part, mode=Mode.SUBTRACT)


with BuildPart() as f4_tool56:
    # F4_s57 → F4_t58 (new body)
    with BuildSketch(Plane.XZ.offset(-1)):
        with Locations((-13.7, 0.5)):
            Rectangle(F4_S57_W, F4_S57_H)
    extrude(amount=F4_T58_DEPTH)

    # F4_s59 → F4_t60 (revolve, cut)
    with BuildSketch(Plane(origin=(-13.2, 1, 1), x_dir=(0.7071067812, 0, 0.7071067812), z_dir=(0.7071067812, 0, -0.7071067812))):
        with BuildLine():
            ThreePointArc((0, -1), (1, 0), (0, 1))
            Line((0, 1), (0, -1))
        make_face()
    revolve(axis=Axis((-13.2, 1, 1), (0, -1, 0)), mode=Mode.SUBTRACT)


with BuildPart() as f1_8:
    add(f1_7.part)

    # F4_t55: cut F4_tool56
    add(f4_tool56.part, mode=Mode.SUBTRACT)


with BuildPart() as f4_tool62:
    # F4_s63 → F4_t64 (new body)
    with BuildSketch(Plane.YZ.offset(-6.2)):
        with Locations((0.5, 0.5)):
            Rectangle(F4_S63_W, F4_S63_H)
    extrude(amount=F4_T64_DEPTH)

    # F4_s65 → F4_t66 (revolve, cut)
    with BuildSketch(Plane(origin=(-6.2, 1, 1), x_dir=(0, 0.7071067812, 0.7071067812), z_dir=(0, 0.7071067812, -0.7071067812))):
        with BuildLine():
            ThreePointArc((0, -1), (1, 0), (0, 1))
            Line((0, 1), (0, -1))
        make_face()
    revolve(axis=Axis((-6.2, 1, 1), (1, 0, 0)), mode=Mode.SUBTRACT)


with BuildPart() as f1_9:
    add(f1_8.part)

    # F4_t61: cut F4_tool62
    add(f4_tool62.part, mode=Mode.SUBTRACT)


with BuildPart() as f4_tool68:
    # F4_s69 → F4_t70 (new body)
    with BuildSketch(Plane.XZ.offset(-1)):
        with Locations((5.7, 0.5)):
            Rectangle(F4_S69_W, F4_S69_H)
    extrude(amount=F4_T70_DEPTH)

    # F4_s71 → F4_t72 (revolve, cut)
    with BuildSketch(Plane(origin=(6.2, 1, 1), x_dir=(0.7071067812, 0, 0.7071067812), z_dir=(0.7071067812, 0, -0.7071067812))):
        with BuildLine():
            ThreePointArc((0, -1), (1, 0), (0, 1))
            Line((0, 1), (0, -1))
        make_face()
    revolve(axis=Axis((6.2, 1, 1), (0, -1, 0)), mode=Mode.SUBTRACT)


with BuildPart() as f1_10:
    add(f1_9.part)

    # F4_t67: cut F4_tool68
    add(f4_tool68.part, mode=Mode.SUBTRACT)


with BuildPart() as f4_tool74:
    # F4_s75 → F4_t76 (new body)
    with BuildSketch(Plane.XZ.offset(-1)):
        with Locations((13.7, 0.5)):
            Rectangle(F4_S75_W, F4_S75_H)
    extrude(amount=F4_T76_DEPTH)

    # F4_s77 → F4_t78 (revolve, cut)
    with BuildSketch(Plane(origin=(13.2, 1, 1), x_dir=(-0.7071067812, 0, 0.7071067812), z_dir=(0.7071067812, 0, 0.7071067812))):
        with BuildLine():
            ThreePointArc((0, -1), (1, 0), (0, 1))
            Line((0, 1), (0, -1))
        make_face()
    revolve(axis=Axis((13.2, 1, 1), (0, -1, 0)), mode=Mode.SUBTRACT)


with BuildPart() as f1_11:
    add(f1_10.part)

    # F4_t73: cut F4_tool74
    add(f4_tool74.part, mode=Mode.SUBTRACT)


with BuildPart() as f4_tool80:
    # F4_s81 → F4_t82 (new body)
    with BuildSketch(Plane.YZ.offset(13.2)):
        with Locations((11.5, 0.5)):
            Rectangle(F4_S81_W, F4_S81_H)
    extrude(amount=F4_T82_DEPTH)

    # F4_s83 → F4_t84 (revolve, cut)
    with BuildSketch(Plane(origin=(13.2, 11, 1), x_dir=(0, -0.7071067812, 0.7071067812), z_dir=(0, 0.7071067812, 0.7071067812))):
        with BuildLine():
            ThreePointArc((0, -1), (1, 0), (0, 1))
            Line((0, 1), (0, -1))
        make_face()
    revolve(axis=Axis((13.2, 11, 1), (1, 0, 0)), mode=Mode.SUBTRACT)


with BuildPart() as f1_12:
    add(f1_11.part)

    # F4_t79: cut F4_tool80
    add(f4_tool80.part, mode=Mode.SUBTRACT)

    # F4_s85 → F4_t86 (revolve, cut)
    with BuildSketch(Plane.XZ.offset(-4)):
        with BuildLine():
            ThreePointArc((-5.2, 14), (-5.4928932188, 14.7071067812), (-6.2, 15))
            Line((-6.2, 15), (-5.2, 15))
            Line((-5.2, 15), (-5.2, 14))
        make_face()
    revolve(axis=Axis((0, 4, 15), (0, 0, -1)), revolution_arc=F4_T86_ANGLE, mode=Mode.SUBTRACT)

    # F4_s87 → F4_t88 (revolve, cut)
    with BuildSketch(Plane.XZ.offset(-4)):
        with BuildLine():
            ThreePointArc((-5.2, 1), (-5.4928932188, 0.2928932188), (-6.2, 0))
            Line((-6.2, 0), (-5.2, 0))
            Line((-5.2, 0), (-5.2, 1))
        make_face()
    revolve(axis=Axis((0, 4, 0), (0, 0, -1)), revolution_arc=F4_T88_ANGLE, mode=Mode.SUBTRACT)


solid = f1_12.part
